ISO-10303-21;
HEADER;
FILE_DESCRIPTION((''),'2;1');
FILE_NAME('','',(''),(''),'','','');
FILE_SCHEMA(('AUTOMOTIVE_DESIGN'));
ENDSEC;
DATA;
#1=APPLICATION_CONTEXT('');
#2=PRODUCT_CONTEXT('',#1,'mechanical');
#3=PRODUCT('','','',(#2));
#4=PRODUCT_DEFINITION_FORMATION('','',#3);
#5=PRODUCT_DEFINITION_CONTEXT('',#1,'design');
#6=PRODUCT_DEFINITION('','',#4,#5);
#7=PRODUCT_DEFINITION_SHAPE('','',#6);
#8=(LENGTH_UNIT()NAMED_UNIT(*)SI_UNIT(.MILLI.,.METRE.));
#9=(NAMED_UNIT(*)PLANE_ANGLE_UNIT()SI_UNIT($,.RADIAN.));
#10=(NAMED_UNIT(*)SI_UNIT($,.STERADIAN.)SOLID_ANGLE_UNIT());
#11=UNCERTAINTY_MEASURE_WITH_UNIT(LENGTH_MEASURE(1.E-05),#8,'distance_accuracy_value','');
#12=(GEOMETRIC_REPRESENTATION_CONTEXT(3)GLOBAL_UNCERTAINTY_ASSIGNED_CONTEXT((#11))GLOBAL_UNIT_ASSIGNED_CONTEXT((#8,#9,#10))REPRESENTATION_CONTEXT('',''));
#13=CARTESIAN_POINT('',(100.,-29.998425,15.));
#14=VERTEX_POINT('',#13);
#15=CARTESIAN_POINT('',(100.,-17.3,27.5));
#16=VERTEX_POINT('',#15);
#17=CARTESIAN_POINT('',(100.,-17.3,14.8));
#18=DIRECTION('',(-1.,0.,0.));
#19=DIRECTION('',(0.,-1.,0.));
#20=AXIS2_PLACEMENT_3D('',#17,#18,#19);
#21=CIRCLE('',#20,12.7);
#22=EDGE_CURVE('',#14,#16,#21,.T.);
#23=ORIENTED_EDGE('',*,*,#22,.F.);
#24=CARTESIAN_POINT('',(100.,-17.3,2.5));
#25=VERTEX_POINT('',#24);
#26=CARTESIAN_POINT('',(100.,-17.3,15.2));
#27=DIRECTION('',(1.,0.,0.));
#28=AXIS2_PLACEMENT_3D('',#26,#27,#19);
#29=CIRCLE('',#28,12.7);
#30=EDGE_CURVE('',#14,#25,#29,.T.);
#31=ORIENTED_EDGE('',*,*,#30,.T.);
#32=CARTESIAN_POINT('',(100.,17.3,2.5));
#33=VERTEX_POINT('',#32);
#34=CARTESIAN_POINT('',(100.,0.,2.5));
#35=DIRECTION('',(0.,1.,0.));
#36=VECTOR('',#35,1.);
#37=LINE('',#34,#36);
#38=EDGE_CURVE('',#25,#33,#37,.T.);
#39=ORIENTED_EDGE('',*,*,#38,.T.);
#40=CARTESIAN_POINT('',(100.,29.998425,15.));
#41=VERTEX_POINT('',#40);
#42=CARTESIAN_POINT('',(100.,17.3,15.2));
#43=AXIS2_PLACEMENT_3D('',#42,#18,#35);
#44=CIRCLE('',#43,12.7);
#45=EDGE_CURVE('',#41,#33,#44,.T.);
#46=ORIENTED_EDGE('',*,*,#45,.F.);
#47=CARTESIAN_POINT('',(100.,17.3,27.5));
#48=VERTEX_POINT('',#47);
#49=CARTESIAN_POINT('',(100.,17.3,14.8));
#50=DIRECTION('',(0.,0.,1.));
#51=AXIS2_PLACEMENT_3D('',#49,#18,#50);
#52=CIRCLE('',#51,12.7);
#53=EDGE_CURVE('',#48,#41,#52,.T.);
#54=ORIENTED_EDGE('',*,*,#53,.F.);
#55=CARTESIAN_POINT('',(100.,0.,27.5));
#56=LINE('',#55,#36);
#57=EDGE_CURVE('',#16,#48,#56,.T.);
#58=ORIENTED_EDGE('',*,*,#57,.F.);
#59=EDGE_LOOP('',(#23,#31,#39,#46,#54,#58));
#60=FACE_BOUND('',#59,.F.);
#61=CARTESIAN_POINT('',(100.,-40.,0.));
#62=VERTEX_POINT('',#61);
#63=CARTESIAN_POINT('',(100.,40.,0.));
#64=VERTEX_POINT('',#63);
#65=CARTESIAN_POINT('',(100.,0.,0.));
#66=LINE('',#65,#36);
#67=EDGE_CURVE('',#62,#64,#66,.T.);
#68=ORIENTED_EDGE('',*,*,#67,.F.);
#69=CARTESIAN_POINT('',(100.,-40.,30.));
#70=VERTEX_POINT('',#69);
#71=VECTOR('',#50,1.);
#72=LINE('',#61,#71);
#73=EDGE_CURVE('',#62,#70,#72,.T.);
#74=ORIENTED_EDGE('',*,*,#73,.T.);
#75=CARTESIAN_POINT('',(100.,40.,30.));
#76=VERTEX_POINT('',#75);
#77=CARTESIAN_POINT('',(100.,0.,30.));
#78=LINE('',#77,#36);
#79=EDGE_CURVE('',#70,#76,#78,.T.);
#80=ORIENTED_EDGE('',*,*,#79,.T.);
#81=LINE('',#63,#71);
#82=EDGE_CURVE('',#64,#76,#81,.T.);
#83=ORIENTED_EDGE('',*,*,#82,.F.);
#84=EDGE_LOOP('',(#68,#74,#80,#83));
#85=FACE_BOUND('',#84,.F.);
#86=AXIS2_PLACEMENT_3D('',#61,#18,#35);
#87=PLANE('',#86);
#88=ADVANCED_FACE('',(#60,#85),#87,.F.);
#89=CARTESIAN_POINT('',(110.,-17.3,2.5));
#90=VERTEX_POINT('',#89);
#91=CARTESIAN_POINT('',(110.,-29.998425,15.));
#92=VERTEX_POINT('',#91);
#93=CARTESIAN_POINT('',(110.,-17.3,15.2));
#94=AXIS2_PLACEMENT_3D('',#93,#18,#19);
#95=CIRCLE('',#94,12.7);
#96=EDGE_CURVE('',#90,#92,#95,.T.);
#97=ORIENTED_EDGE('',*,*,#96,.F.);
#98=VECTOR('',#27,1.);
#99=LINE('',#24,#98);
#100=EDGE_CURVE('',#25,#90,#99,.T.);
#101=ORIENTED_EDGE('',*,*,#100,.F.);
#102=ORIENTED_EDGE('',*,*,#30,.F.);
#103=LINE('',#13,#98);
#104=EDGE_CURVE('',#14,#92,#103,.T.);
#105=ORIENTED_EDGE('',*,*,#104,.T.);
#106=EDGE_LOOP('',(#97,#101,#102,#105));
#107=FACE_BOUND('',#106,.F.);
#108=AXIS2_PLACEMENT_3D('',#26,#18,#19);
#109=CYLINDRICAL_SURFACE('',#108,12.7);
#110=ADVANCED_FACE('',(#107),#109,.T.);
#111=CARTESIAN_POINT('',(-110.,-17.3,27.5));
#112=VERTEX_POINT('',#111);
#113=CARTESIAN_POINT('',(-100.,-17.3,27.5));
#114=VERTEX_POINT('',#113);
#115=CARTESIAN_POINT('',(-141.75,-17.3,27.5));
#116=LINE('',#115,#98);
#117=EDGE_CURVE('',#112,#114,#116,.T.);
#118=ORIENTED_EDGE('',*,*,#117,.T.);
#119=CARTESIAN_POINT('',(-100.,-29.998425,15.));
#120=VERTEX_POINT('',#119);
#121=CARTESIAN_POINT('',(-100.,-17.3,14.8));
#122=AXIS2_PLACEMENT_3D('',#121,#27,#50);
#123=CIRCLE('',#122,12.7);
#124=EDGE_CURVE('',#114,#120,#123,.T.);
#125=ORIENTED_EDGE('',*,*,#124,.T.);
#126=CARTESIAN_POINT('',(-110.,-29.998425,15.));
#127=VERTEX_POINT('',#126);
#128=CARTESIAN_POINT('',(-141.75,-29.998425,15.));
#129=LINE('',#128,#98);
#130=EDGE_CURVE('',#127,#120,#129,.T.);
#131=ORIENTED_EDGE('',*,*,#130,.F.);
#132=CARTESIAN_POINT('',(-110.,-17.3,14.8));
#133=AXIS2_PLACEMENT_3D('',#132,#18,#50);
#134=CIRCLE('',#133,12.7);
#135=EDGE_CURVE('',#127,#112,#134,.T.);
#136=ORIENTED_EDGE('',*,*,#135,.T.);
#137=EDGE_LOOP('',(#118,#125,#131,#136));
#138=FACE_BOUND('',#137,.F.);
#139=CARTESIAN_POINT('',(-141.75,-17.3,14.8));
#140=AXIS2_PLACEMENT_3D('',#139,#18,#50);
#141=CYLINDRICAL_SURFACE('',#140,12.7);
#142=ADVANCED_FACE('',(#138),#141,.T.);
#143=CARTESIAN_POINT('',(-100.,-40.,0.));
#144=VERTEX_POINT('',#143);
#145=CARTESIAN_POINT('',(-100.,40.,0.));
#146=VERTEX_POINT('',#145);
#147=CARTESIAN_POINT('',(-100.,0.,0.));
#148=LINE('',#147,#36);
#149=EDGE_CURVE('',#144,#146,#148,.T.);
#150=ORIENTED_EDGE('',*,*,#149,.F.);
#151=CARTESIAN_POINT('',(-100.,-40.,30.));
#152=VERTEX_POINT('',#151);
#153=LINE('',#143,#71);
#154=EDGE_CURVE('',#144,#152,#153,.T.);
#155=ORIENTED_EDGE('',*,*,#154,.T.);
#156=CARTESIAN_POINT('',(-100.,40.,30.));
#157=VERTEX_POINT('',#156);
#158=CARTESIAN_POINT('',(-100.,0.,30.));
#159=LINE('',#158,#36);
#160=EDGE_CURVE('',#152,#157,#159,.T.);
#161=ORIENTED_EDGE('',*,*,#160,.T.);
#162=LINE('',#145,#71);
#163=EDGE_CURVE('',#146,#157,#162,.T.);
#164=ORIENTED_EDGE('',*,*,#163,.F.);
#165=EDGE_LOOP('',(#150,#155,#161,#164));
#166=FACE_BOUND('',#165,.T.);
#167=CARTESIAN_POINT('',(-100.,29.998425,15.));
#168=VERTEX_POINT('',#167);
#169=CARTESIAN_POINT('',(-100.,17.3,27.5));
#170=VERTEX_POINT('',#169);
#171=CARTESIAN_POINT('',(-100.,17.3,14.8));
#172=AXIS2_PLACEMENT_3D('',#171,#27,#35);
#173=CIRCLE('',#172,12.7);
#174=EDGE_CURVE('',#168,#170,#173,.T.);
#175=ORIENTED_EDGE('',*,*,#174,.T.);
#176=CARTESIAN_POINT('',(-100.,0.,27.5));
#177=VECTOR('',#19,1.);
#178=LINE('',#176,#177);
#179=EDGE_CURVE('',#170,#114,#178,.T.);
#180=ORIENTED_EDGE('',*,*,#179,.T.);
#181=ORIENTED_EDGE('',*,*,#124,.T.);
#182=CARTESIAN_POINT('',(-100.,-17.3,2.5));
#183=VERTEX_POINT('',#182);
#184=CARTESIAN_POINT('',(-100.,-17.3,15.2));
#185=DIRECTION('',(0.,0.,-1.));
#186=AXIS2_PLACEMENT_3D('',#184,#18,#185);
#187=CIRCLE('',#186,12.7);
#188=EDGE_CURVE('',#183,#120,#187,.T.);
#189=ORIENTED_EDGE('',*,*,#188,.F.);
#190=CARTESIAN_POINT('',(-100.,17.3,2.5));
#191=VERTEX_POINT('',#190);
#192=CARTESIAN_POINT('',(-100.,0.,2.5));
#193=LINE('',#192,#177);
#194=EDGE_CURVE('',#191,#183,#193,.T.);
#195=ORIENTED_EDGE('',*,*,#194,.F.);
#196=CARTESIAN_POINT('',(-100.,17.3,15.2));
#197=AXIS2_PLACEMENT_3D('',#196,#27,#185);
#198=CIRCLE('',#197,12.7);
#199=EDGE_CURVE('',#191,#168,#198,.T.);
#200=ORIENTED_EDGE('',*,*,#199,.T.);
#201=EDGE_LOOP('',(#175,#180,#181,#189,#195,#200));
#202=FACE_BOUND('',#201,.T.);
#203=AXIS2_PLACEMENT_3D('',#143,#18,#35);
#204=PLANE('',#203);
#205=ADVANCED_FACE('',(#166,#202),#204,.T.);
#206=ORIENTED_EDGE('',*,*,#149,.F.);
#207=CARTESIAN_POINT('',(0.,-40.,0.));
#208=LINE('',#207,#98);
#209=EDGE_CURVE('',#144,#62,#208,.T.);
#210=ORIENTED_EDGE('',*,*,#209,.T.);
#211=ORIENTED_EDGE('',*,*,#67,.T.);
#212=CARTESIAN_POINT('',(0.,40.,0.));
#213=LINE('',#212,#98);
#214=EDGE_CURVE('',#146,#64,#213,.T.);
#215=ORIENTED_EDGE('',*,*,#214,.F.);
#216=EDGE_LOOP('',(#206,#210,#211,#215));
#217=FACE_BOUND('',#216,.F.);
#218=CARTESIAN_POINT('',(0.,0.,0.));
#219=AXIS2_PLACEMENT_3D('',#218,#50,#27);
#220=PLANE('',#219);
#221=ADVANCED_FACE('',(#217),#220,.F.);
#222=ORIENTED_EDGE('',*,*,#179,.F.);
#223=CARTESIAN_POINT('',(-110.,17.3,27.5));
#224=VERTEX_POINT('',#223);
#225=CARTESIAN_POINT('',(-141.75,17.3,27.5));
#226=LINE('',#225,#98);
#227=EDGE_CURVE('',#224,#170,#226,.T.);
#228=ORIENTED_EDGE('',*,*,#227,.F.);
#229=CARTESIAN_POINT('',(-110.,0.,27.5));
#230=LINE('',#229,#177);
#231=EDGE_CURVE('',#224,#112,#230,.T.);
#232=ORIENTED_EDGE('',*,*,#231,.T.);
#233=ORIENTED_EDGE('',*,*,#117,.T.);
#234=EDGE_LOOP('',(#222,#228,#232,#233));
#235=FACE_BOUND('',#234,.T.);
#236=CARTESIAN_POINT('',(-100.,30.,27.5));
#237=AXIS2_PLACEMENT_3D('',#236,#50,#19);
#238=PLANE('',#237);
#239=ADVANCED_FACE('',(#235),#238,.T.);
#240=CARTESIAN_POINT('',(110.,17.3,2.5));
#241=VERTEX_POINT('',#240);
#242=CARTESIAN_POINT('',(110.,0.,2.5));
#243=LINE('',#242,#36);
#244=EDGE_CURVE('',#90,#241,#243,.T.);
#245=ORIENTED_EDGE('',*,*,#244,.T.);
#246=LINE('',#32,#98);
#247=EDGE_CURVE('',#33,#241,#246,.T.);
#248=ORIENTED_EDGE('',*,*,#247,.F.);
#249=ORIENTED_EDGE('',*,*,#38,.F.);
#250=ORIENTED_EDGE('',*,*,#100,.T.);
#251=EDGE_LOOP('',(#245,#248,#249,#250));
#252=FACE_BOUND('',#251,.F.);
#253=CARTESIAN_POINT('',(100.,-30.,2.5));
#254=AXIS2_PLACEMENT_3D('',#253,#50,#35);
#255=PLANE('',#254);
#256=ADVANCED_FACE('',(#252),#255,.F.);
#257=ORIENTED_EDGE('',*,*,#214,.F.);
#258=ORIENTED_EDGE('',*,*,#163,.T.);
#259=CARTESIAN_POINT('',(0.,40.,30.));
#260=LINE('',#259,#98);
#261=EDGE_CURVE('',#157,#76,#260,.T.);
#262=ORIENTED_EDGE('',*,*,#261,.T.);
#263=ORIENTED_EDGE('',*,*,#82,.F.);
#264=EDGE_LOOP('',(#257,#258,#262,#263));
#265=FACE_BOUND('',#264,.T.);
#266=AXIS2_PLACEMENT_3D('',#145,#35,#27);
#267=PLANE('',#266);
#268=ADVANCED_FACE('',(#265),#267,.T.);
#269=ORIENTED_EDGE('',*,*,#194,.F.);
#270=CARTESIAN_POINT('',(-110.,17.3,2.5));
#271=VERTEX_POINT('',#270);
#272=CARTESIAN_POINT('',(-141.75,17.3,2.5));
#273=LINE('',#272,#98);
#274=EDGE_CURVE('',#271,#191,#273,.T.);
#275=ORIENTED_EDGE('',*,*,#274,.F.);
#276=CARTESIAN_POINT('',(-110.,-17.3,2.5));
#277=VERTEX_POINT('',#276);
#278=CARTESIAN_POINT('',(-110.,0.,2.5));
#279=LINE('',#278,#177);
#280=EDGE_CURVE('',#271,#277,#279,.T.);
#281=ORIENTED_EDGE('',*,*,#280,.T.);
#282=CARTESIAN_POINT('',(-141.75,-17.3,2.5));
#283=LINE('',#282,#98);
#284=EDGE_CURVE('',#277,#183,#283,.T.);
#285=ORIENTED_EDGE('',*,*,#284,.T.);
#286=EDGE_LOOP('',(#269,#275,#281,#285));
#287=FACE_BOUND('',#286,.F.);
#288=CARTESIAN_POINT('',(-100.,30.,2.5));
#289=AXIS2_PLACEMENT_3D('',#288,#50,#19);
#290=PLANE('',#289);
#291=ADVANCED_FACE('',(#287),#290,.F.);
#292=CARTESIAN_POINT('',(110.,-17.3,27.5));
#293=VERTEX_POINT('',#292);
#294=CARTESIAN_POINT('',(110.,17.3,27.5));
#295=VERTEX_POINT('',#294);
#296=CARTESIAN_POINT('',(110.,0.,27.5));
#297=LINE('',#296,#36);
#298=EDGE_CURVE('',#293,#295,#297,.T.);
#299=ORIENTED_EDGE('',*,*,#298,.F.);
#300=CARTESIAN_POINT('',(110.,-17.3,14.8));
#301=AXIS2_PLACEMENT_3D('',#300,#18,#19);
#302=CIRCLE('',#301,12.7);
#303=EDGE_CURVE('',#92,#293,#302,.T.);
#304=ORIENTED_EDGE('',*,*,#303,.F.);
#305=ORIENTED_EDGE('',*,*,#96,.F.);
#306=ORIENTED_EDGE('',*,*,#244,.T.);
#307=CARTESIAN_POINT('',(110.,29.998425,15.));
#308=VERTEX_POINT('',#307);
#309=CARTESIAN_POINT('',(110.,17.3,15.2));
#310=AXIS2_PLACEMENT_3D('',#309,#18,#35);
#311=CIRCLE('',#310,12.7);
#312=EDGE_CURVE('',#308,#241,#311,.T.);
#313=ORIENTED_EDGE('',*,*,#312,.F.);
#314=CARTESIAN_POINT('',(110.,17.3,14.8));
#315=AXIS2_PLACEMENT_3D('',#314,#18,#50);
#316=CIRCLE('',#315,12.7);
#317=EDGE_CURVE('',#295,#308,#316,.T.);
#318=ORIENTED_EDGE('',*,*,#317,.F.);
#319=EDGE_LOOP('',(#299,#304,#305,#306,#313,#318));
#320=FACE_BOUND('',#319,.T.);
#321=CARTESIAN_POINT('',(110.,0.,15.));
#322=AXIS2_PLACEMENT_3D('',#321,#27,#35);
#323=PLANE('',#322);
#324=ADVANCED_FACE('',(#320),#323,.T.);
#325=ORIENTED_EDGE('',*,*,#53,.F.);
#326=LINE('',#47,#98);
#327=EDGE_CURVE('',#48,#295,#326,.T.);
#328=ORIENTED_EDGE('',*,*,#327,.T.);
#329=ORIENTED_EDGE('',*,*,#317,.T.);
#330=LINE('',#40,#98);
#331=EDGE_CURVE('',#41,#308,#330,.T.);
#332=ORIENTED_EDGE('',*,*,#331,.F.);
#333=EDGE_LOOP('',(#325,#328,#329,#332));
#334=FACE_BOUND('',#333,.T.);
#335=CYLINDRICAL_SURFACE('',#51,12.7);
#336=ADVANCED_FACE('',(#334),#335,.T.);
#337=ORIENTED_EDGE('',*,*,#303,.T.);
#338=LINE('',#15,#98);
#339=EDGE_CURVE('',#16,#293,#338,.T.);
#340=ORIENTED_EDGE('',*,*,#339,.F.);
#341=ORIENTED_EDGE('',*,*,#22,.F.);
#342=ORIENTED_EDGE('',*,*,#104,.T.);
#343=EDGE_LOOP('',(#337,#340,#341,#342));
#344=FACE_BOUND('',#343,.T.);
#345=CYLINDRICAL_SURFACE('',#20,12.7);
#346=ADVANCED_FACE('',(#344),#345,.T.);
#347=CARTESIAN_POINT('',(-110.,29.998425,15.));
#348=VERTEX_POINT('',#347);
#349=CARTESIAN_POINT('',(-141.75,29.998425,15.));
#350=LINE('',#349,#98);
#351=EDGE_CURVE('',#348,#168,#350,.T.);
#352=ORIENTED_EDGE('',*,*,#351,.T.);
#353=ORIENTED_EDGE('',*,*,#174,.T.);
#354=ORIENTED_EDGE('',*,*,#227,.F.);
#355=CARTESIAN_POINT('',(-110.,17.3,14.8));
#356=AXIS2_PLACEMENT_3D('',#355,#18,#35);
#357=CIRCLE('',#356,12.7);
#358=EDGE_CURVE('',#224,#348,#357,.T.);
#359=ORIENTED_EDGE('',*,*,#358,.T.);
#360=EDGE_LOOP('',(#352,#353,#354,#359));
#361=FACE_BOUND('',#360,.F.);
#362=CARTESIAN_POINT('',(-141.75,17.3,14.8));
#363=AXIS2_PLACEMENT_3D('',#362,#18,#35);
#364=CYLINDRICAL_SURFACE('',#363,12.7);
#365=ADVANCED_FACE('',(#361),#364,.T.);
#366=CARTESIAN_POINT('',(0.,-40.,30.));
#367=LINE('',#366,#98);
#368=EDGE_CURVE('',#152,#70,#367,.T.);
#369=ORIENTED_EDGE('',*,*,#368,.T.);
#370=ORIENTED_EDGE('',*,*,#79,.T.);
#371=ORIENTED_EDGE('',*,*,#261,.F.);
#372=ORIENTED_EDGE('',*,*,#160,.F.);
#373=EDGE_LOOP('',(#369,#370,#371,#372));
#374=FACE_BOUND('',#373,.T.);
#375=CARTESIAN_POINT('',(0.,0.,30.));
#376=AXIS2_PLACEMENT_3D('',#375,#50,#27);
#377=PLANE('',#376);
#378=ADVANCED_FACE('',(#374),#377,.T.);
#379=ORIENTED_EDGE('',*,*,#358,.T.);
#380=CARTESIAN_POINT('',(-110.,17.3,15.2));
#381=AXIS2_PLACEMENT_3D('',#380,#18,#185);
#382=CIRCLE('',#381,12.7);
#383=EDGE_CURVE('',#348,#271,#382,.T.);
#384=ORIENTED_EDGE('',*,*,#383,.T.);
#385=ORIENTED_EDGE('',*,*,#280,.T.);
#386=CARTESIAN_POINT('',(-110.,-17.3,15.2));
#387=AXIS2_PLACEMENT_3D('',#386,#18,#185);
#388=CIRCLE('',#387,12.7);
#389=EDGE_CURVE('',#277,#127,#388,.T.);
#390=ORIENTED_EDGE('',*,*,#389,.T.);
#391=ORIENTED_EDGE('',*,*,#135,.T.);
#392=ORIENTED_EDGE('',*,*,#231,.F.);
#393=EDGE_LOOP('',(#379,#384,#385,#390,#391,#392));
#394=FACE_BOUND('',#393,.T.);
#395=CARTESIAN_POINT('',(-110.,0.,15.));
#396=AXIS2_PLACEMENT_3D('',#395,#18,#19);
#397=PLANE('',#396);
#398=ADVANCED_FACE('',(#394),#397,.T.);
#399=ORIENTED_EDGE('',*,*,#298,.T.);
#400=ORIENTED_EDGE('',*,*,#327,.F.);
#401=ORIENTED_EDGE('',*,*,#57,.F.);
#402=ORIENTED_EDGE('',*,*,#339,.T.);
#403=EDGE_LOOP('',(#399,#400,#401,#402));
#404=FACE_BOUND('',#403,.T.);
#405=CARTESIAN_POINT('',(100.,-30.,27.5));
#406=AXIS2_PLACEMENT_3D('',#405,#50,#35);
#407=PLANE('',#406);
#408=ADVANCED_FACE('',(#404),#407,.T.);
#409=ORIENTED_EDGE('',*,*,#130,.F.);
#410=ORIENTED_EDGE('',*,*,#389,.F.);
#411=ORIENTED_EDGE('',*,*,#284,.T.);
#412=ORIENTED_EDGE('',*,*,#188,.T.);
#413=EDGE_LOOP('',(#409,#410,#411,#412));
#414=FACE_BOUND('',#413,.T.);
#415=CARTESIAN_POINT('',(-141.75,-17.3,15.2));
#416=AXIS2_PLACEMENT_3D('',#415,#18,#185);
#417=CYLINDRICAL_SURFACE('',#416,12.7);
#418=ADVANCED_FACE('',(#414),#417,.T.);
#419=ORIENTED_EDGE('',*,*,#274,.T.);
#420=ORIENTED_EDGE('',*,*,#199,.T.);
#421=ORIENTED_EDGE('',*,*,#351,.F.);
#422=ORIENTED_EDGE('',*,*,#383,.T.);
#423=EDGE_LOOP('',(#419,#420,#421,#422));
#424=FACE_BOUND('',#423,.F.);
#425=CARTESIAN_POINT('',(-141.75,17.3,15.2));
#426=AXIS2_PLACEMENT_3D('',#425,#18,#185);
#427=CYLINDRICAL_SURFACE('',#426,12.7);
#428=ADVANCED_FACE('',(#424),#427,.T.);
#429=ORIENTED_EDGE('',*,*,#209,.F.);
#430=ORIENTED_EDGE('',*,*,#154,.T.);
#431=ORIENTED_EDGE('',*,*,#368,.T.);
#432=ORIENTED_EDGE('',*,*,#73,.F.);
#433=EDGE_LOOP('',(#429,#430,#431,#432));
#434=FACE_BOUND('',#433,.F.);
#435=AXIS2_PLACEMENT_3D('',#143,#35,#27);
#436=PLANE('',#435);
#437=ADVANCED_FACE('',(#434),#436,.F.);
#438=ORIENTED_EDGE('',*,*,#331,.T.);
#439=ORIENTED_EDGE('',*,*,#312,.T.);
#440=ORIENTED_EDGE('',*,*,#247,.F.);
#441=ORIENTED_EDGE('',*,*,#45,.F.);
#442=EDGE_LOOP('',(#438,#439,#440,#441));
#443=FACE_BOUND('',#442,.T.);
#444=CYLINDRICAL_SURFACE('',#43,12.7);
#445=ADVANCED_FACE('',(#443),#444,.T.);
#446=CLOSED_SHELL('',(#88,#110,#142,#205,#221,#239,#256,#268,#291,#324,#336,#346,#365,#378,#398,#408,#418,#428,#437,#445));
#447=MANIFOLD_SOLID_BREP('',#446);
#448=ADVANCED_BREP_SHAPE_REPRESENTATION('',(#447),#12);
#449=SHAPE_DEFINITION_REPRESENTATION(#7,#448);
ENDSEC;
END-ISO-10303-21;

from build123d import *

# Parameters (mm, degrees)
F0_W        = 200
F0_H        = 80
F1_DEPTH    = 30
F2_W        = 60
F2_H        = 25
F3_DEPTH    = 10
F4_W        = 60
F4_H        = 25
F5_DEPTH    = 10
F6_T1_DEPTH = 41.75
F6_T3_DEPTH = 41.75


# Not quite as in the source:
# - a fillet or chamfer that OpenCascade refuses, or shapes differently, is made with other operations: its cross-section is extruded or revolved along the edge and cut away or added


with BuildPart() as f1:
    # F0 (on Top) → F1 (new body)
    with BuildSketch(Plane.XY):
        Rectangle(F0_W, F0_H)
    extrude(amount=F1_DEPTH)

    # F2 (on face) → F3 (join)
    with BuildSketch(Plane(origin=(-100, 0, 0), x_dir=(0, -1, 0), z_dir=(-1, 0, 0))):
        with Locations((0, 15)):
            Rectangle(F2_W, F2_H)
    extrude(amount=F3_DEPTH)

    # F4 (on face) → F5 (join)
    with BuildSketch(Plane.YZ.offset(100)):
        with Locations((0, 15)):
            Rectangle(F4_W, F4_H)
    extrude(amount=F5_DEPTH)

    # F6: fillet of radius 12.7 on 8 edges, made by hand

    # F6_s2 → F6_t1 (cut)
    with BuildSketch(Plane.YZ.offset(100)):
        with BuildLine():
            ThreePointArc((-30, 14.8), (-26.2802561211, 23.7802561211), (-17.3, 27.5))
            Line((-17.3, 27.5), (-30, 27.5))
            Line((-30, 27.5), (-30, 14.8))
        make_face()
        with BuildLine():
            ThreePointArc((-30, 15.2), (-26.2802561211, 6.2197438789), (-17.3, 2.5))
            Line((-17.3, 2.5), (-30, 2.5))
            Line((-30, 2.5), (-30, 15.2))
        make_face()
        with BuildLine():
            ThreePointArc((17.3, 27.5), (26.2802561211, 23.7802561211), (30, 14.8))
            Line((30, 14.8), (30, 27.5))
            Line((30, 27.5), (17.3, 27.5))
        make_face()
        with BuildLine():
            ThreePointArc((30, 15.2), (26.2802561211, 6.2197438789), (17.3, 2.5))
            Line((17.3, 2.5), (30, 2.5))
            Line((30, 2.5), (30, 15.2))
        make_face()
    extrude(amount=F6_T1_DEPTH, mode=Mode.SUBTRACT)

    # F6_s4 → F6_t3 (cut)
    with BuildSketch(Plane.YZ.offset(-141.75)):
        with BuildLine():
            ThreePointArc((30, 14.8), (26.2802561211, 23.7802561211), (17.3, 27.5))
            Line((17.3, 27.5), (30, 27.5))
            Line((30, 27.5), (30, 14.8))
        make_face()
        with BuildLine():
            ThreePointArc((-17.3, 27.5), (-26.2802561211, 23.7802561211), (-30, 14.8))
            Line((-30, 14.8), (-30, 27.5))
            Line((-30, 27.5), (-17.3, 27.5))
        make_face()
        with BuildLine():
            ThreePointArc((-17.3, 2.5), (-26.2802561211, 6.2197438789), (-30, 15.2))
            Line((-30, 15.2), (-30, 2.5))
            Line((-30, 2.5), (-17.3, 2.5))
        make_face()
        with BuildLine():
            ThreePointArc((17.3, 2.5), (26.2802561211, 6.2197438789), (30, 15.2))
            Line((30, 15.2), (30, 2.5))
            Line((30, 2.5), (17.3, 2.5))
        make_face()
    extrude(amount=F6_T3_DEPTH, mode=Mode.SUBTRACT)


solid = f1.part
